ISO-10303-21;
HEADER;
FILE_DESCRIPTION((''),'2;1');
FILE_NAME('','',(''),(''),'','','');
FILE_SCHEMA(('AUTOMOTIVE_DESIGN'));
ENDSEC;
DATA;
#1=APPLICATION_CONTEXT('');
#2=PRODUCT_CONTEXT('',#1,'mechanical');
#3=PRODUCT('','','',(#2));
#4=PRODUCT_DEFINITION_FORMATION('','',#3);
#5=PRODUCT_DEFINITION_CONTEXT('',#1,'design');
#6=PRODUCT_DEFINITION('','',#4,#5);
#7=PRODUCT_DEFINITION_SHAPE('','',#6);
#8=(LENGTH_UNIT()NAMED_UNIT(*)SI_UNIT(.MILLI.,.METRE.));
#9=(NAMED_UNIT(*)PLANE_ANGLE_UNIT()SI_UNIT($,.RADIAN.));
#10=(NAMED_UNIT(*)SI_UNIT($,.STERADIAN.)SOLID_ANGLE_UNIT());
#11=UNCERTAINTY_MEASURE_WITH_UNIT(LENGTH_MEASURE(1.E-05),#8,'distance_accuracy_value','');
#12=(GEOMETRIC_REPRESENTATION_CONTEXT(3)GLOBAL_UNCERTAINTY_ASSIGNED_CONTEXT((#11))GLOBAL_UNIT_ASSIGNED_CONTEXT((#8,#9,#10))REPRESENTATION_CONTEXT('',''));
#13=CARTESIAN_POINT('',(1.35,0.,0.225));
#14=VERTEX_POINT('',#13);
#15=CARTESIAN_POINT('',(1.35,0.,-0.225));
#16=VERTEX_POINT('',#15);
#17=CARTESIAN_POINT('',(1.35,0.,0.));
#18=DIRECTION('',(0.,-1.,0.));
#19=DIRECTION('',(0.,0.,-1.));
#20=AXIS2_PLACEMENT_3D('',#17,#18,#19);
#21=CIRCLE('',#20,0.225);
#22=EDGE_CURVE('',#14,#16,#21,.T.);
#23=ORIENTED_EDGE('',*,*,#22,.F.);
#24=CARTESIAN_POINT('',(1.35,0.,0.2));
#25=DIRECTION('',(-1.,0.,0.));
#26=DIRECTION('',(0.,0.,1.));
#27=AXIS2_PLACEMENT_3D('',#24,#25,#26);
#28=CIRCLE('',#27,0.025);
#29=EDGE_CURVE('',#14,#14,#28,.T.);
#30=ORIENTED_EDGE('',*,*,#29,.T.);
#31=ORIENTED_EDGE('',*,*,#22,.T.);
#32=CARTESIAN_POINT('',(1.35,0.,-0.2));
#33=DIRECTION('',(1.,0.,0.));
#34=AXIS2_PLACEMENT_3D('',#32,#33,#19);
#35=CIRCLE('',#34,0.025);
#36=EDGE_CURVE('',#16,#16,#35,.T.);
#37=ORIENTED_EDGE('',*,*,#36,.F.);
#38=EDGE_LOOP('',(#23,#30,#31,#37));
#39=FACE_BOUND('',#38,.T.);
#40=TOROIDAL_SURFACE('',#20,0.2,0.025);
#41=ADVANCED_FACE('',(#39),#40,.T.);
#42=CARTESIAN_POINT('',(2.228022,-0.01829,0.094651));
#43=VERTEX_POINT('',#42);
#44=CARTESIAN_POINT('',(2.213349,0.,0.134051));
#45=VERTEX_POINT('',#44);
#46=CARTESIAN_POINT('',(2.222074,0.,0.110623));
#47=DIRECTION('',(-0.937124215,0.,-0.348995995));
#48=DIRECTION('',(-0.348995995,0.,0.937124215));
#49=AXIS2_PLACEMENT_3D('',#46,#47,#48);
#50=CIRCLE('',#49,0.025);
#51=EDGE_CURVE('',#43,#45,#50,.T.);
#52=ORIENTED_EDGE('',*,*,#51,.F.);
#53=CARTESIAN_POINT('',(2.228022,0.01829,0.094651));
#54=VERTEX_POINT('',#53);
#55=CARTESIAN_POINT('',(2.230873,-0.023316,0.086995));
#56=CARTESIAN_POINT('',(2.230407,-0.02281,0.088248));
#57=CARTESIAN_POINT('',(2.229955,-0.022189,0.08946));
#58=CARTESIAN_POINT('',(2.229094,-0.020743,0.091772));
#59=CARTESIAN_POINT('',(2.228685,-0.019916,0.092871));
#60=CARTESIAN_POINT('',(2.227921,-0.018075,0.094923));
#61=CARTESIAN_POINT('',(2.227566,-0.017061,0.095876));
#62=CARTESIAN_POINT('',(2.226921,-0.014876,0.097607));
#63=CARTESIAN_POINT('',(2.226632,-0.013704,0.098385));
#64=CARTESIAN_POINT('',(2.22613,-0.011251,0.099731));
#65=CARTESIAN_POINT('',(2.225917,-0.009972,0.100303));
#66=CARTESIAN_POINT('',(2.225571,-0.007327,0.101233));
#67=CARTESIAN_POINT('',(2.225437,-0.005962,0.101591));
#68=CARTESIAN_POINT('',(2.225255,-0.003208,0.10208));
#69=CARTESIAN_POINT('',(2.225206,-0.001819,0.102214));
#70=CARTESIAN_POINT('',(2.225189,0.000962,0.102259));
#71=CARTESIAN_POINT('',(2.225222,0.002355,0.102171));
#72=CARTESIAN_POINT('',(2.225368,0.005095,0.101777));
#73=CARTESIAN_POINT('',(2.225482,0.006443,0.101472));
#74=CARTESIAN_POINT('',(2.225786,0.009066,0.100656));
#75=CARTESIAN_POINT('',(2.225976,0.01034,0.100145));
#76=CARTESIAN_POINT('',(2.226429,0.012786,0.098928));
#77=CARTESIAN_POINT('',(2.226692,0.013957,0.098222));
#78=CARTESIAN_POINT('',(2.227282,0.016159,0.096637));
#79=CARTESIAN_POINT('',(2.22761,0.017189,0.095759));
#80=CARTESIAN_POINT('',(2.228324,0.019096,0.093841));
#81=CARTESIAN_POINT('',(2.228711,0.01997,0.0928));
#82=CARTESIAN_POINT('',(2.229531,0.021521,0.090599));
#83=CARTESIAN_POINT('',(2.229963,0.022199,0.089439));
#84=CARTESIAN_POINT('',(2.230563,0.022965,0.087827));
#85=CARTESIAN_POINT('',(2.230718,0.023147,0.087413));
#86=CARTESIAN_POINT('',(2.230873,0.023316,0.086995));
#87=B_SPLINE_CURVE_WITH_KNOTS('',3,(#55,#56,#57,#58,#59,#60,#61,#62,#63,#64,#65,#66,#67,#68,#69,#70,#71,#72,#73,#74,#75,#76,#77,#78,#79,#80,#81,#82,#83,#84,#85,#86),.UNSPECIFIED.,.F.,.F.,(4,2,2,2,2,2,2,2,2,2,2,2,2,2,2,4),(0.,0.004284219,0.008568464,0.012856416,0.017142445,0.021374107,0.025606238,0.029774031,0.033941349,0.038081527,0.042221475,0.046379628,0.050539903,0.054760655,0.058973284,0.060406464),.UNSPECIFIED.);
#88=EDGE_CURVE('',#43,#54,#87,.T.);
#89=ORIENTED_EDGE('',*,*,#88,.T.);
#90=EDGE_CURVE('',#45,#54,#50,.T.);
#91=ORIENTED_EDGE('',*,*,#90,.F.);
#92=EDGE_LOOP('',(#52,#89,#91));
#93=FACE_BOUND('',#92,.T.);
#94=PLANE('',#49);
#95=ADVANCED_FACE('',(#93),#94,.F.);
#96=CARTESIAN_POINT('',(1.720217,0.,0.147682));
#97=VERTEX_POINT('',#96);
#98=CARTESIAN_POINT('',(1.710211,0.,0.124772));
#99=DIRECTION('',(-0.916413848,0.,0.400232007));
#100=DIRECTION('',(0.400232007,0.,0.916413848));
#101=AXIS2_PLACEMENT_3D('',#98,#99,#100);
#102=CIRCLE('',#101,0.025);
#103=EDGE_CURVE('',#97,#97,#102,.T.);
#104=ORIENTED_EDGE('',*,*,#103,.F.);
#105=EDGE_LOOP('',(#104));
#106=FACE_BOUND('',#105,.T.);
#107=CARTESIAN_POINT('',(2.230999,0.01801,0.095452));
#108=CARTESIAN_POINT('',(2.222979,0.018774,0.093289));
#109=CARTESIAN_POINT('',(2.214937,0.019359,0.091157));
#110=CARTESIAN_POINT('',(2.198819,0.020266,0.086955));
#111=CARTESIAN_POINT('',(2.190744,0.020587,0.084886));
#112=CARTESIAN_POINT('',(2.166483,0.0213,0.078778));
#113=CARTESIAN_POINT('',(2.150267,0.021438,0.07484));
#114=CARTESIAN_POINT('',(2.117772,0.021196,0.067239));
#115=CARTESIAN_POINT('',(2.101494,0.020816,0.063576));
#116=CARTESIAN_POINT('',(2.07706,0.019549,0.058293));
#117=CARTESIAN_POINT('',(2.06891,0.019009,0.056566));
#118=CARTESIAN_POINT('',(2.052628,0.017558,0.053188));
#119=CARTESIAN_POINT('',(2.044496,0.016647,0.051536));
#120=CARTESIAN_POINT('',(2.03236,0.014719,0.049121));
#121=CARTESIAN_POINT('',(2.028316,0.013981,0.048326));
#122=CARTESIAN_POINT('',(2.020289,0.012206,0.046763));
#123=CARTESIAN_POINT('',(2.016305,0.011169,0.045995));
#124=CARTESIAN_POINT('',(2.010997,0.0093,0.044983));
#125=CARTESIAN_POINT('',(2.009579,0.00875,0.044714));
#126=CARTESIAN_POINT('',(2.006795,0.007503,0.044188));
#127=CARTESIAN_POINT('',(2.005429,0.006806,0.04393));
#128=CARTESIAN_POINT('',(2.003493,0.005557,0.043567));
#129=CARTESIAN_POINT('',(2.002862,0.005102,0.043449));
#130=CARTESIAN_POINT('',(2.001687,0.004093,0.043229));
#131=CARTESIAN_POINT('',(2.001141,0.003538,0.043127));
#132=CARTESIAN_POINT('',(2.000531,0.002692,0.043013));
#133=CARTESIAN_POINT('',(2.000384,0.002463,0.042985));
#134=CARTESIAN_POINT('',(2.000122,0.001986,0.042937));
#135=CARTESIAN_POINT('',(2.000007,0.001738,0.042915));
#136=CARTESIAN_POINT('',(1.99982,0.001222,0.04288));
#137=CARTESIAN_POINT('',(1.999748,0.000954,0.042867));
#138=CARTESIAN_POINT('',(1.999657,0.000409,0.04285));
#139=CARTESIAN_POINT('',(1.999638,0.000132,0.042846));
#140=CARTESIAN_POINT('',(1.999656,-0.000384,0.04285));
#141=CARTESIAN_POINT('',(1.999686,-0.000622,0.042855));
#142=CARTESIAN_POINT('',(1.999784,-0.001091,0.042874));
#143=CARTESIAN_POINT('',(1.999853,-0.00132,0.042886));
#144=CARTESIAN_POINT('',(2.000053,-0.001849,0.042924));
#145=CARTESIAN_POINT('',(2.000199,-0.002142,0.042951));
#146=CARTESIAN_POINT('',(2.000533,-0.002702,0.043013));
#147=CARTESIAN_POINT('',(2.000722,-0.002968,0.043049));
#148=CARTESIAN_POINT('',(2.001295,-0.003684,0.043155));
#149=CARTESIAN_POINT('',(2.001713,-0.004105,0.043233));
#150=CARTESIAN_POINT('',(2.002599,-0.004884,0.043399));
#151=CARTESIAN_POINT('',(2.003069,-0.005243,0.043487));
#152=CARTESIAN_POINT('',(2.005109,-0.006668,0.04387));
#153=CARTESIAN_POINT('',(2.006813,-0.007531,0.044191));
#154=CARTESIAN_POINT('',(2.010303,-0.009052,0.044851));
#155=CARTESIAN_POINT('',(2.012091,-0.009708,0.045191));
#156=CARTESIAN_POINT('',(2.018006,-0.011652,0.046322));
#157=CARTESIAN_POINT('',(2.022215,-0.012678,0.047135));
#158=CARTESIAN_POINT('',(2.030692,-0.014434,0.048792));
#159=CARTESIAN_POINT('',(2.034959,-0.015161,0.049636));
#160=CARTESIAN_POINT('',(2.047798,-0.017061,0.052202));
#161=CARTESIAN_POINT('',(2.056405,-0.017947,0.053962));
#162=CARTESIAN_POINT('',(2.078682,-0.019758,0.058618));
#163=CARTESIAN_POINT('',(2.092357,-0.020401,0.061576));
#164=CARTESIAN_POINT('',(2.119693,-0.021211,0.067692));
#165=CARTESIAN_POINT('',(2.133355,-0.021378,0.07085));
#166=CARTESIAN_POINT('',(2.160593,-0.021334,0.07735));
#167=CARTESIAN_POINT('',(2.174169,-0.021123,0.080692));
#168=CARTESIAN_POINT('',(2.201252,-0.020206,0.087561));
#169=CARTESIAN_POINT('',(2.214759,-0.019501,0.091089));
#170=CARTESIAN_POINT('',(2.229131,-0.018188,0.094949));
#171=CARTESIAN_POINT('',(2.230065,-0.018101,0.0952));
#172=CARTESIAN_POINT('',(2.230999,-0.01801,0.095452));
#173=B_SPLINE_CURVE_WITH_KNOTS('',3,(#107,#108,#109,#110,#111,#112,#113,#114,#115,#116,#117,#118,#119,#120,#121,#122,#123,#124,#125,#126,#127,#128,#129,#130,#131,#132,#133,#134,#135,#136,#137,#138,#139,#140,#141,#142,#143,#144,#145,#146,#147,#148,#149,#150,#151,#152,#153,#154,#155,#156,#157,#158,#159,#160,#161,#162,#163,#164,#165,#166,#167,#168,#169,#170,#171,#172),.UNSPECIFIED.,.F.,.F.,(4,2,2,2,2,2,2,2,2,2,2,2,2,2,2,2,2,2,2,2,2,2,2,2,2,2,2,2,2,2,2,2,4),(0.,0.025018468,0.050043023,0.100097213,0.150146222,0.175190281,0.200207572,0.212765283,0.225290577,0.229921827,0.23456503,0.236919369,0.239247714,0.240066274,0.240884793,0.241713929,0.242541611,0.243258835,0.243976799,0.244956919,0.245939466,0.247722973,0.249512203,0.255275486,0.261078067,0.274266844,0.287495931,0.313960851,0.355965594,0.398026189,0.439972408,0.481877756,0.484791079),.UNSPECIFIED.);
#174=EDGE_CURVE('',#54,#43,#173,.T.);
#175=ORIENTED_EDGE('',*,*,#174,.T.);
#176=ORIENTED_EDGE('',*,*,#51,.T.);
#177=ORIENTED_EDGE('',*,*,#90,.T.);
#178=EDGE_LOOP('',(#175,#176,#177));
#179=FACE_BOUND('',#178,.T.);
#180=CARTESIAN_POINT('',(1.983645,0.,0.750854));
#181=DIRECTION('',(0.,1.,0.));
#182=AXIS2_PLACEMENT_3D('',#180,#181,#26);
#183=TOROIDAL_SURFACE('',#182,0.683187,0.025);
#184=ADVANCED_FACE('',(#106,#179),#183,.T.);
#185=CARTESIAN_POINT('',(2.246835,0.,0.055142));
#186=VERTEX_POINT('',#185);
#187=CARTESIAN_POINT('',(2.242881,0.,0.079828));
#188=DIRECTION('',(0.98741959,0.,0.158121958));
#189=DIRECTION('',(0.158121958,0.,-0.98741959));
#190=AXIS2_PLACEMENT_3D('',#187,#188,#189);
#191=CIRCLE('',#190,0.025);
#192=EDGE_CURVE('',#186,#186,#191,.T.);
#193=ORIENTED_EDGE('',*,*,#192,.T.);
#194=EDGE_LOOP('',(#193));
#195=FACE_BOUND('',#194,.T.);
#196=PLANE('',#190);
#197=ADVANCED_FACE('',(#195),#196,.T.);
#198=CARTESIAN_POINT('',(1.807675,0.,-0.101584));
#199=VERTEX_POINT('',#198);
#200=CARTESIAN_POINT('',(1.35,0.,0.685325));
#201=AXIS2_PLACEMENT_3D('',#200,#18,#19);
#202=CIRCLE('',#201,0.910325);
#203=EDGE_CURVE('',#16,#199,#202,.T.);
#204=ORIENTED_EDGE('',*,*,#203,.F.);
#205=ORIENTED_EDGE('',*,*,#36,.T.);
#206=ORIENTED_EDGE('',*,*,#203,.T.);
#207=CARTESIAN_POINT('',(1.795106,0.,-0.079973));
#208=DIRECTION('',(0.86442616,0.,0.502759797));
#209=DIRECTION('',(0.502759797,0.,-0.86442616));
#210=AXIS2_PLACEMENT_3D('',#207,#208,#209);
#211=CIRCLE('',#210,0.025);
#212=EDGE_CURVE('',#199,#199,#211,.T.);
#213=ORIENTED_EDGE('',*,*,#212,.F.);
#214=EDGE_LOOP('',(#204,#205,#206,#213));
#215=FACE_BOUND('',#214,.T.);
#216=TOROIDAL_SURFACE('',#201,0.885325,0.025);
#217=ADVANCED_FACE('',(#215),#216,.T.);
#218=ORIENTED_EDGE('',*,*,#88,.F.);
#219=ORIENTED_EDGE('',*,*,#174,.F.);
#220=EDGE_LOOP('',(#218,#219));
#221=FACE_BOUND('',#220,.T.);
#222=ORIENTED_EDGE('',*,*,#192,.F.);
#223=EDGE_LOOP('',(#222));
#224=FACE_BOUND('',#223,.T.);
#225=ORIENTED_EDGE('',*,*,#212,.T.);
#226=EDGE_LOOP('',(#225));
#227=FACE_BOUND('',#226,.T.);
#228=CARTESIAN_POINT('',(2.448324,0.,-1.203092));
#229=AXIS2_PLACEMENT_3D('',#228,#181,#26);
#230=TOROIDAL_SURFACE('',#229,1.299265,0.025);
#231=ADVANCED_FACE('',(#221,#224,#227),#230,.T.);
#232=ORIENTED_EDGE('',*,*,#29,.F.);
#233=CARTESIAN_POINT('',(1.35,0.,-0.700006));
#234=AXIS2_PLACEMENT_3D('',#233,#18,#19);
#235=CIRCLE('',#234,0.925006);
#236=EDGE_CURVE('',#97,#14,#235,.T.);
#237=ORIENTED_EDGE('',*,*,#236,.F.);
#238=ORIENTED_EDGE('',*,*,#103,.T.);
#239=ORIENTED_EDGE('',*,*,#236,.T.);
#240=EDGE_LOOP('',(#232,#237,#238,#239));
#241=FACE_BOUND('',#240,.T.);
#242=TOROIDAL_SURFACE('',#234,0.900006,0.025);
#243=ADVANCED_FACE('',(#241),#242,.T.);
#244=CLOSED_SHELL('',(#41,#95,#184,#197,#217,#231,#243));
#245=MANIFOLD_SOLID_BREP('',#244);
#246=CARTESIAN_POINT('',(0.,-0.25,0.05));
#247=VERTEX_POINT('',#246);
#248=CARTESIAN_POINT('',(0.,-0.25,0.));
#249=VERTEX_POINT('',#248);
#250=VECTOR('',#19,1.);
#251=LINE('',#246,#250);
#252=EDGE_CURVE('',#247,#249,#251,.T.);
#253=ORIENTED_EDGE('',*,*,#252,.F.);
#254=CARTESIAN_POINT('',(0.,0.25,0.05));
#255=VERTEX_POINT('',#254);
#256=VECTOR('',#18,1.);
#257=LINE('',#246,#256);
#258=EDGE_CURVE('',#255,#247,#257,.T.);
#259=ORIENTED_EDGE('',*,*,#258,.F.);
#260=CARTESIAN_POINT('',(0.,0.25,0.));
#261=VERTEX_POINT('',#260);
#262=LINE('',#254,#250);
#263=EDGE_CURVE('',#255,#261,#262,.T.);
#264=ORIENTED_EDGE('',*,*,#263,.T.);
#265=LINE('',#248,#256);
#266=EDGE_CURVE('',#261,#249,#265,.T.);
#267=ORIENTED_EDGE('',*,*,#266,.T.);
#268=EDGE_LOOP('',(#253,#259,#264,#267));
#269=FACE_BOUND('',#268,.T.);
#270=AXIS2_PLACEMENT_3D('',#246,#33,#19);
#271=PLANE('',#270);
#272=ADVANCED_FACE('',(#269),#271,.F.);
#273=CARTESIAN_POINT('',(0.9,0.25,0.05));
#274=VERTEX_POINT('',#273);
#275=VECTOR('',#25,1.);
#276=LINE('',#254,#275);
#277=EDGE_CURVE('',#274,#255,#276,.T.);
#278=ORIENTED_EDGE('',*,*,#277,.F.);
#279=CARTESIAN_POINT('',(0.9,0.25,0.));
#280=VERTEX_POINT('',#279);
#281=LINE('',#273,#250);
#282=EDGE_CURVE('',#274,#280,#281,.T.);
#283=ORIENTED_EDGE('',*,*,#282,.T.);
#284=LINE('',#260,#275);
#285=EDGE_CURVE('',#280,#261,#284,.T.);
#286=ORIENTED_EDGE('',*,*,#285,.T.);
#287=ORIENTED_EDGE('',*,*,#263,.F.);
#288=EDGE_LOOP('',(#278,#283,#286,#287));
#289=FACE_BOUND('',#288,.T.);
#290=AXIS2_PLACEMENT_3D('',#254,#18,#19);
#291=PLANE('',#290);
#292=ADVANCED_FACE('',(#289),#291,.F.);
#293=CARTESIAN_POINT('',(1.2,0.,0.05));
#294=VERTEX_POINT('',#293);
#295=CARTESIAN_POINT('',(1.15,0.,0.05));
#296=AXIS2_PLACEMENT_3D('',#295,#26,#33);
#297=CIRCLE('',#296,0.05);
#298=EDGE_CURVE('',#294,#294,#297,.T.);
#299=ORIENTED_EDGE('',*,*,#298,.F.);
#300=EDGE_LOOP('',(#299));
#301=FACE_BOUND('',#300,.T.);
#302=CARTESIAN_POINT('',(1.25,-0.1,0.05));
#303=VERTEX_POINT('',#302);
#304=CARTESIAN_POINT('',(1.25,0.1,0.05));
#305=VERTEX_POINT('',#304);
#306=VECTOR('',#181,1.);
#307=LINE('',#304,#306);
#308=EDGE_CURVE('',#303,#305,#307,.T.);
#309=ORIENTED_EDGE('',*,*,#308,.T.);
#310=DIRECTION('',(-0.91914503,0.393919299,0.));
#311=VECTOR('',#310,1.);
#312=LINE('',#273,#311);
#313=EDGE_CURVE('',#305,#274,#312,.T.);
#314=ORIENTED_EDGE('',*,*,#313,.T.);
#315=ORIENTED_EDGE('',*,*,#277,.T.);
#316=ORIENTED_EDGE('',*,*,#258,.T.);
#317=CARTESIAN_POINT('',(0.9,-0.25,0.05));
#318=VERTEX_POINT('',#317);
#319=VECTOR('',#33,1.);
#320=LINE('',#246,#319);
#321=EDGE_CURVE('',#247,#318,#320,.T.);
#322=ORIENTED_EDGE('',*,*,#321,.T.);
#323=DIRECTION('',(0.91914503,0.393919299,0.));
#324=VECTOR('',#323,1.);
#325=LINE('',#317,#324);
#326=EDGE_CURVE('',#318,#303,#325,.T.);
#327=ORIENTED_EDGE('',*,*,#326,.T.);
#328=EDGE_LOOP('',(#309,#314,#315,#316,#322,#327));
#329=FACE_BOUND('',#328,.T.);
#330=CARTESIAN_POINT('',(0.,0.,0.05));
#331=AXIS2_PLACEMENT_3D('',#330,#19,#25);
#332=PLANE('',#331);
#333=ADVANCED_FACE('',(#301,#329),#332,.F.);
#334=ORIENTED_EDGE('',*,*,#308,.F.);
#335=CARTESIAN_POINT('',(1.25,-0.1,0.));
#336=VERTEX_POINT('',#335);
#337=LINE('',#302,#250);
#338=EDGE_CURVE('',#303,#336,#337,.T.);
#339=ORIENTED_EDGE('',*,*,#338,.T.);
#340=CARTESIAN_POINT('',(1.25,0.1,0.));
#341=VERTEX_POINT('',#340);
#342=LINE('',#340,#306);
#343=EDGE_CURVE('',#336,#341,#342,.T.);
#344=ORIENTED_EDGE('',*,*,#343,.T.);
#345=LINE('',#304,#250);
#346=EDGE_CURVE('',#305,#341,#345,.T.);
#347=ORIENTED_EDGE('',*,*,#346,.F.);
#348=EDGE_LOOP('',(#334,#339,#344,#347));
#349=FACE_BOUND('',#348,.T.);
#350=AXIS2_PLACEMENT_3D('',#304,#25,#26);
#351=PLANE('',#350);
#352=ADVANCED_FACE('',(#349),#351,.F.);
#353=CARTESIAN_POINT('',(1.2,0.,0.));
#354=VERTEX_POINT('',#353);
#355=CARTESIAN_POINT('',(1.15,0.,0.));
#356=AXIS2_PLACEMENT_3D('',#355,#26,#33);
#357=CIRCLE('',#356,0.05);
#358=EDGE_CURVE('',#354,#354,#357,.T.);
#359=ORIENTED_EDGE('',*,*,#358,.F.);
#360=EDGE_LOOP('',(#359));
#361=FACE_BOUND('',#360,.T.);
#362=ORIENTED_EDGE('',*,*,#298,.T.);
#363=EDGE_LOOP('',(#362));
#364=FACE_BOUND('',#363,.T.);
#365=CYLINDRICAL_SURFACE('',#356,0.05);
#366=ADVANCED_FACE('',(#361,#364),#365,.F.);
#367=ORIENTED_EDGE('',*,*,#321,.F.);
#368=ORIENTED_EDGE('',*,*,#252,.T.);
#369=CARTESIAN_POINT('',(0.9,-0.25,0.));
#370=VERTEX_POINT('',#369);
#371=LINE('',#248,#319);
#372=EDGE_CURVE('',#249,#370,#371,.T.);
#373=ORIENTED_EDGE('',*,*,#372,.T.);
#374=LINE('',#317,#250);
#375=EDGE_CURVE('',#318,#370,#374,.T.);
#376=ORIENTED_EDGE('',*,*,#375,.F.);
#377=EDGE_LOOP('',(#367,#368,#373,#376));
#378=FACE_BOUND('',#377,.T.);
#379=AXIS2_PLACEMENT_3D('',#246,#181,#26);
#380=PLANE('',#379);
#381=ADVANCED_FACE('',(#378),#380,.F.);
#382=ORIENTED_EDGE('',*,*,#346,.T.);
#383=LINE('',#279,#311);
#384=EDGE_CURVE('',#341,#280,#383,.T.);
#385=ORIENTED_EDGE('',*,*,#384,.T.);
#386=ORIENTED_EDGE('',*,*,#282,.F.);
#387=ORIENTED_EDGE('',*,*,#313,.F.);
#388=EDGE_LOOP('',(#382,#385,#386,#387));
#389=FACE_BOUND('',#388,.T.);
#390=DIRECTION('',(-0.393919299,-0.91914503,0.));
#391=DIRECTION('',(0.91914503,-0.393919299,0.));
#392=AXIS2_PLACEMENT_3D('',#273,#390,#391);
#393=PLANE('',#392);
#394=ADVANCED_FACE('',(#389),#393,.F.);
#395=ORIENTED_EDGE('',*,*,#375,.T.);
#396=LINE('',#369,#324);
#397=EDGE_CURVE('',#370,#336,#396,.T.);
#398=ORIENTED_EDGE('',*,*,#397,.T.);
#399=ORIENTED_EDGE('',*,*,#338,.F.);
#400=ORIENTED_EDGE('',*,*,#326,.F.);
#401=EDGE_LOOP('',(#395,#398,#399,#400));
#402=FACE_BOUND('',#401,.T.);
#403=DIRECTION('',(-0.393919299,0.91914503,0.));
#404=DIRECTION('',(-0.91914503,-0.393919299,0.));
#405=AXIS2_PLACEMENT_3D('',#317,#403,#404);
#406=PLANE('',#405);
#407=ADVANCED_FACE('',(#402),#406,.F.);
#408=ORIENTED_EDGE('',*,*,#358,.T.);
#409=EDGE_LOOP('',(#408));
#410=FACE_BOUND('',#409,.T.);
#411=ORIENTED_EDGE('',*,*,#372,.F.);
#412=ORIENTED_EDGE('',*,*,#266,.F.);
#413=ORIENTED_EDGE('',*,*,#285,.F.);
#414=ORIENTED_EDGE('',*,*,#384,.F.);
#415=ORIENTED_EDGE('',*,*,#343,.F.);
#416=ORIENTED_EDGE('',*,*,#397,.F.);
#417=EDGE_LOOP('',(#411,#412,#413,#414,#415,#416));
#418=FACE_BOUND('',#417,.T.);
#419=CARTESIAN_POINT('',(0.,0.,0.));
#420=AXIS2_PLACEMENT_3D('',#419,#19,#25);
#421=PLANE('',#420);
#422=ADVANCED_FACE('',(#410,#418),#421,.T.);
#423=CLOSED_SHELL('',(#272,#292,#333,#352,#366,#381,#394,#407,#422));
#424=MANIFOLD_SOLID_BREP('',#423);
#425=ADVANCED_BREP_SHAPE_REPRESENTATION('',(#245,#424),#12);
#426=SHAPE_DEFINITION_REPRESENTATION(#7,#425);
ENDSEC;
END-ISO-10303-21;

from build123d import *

# Parameters (mm, degrees)
BOSS_EXTRUDE1_DEPTH = 0.05
SKETCH2_R           = 0.05
CUT_EXTRUDE1_DEPTH  = 2.275735082
SWEEP5_OUTLINE_R    = 0.025
SWEEP5_ANGLE        = 44.018601
SWEEP5_2_OUTLINE_R  = 0.025
SWEEP5_2_ANGLE      = 23.592683
SWEEP5_3_OUTLINE_R  = 0.025
SWEEP5_3_ANGLE      = 180
SWEEP5_4_OUTLINE_R  = 0.025
SWEEP5_4_ANGLE      = 30.182755
SWEEP5_5_OUTLINE_R  = 0.025
SWEEP5_5_ANGLE      = 21.084851


with BuildPart() as part:
    # Sketch1 → Boss-Extrude1 (new body)
    with BuildSketch(Plane.XY):
        Polygon((0, -0.25), (0, 0.25), (0.9, 0.25), (1.25, 0.1), (1.25, -0.1), (0.9, -0.25), align=None)
    extrude(amount=BOSS_EXTRUDE1_DEPTH)

    # Sketch2 → Cut-Extrude1 (cut, through all)
    with BuildSketch(Plane.XY.offset(0.05)):
        with Locations((1.15, 0)):
            Circle(SKETCH2_R)
    extrude(amount=-CUT_EXTRUDE1_DEPTH, mode=Mode.SUBTRACT)


with BuildPart() as body_2:
    # Sweep5: read off the stored shape, not the designer's step
    # Sweep5 outline → Sweep5 (revolve)
    with BuildSketch(Plane(origin=(1.983644538, 0, 0.750853873), x_dir=(0.3489959997719201, 0, -0.9371242138282405), z_dir=(0.9371242138282405, 0, 0.3489959997719201))):
        with Locations((0.683186889, 0)):
            Circle(SWEEP5_OUTLINE_R)
    revolve(axis=Axis((1.983644538, 0, 0.750853873), (0, 1, 0)), revolution_arc=SWEEP5_ANGLE)

    # Sweep5 2 outline → Sweep5 2 (revolve)
    with BuildSketch(Plane(origin=(1.35, 0, -0.700006175), x_dir=(0, 0, 1), z_dir=(-1, 0, 0))):
        with Locations((0.900006175, 0)):
            Circle(SWEEP5_2_OUTLINE_R)
    revolve(axis=Axis((1.35, 0, -0.700006175), (0, 1, 0)), revolution_arc=SWEEP5_2_ANGLE)

    # Sweep5 3 outline → Sweep5 3 (revolve)
    with BuildSketch(Plane(origin=(1.35, 0, 0), x_dir=(0, 0, -1), z_dir=(1, 0, 0))):
        with Locations((0.2, 0)):
            Circle(SWEEP5_3_OUTLINE_R)
    revolve(axis=Axis((1.35, 0, 0), (0, 1, 0)), revolution_arc=SWEEP5_3_ANGLE)

    # Sweep5 4 outline → Sweep5 4 (revolve)
    with BuildSketch(Plane(origin=(1.35, 0, 0.685324543), x_dir=(0.5027597968291189, 0, -0.8644261603470497), z_dir=(0.8644261603470497, 0, 0.5027597968291189))):
        with Locations((0.885324543, 0)):
            Circle(SWEEP5_4_OUTLINE_R)
    revolve(axis=Axis((1.35, 0, 0.685324543), (0, 1, 0)), revolution_arc=SWEEP5_4_ANGLE)

    # Sweep5 5 outline → Sweep5 5 (revolve)
    with BuildSketch(Plane(origin=(2.448323774, 0, -1.203091772), x_dir=(-0.502759796829121, 0, 0.8644261603470483), z_dir=(-0.8644261603470483, 0, -0.502759796829121))):
        with Locations((1.299264959, 0)):
            Circle(SWEEP5_5_OUTLINE_R)
    revolve(axis=Axis((2.448323774, 0, -1.203091772), (0, 1, 0)), revolution_arc=SWEEP5_5_ANGLE)


solid = Compound([part.part, body_2.part])
